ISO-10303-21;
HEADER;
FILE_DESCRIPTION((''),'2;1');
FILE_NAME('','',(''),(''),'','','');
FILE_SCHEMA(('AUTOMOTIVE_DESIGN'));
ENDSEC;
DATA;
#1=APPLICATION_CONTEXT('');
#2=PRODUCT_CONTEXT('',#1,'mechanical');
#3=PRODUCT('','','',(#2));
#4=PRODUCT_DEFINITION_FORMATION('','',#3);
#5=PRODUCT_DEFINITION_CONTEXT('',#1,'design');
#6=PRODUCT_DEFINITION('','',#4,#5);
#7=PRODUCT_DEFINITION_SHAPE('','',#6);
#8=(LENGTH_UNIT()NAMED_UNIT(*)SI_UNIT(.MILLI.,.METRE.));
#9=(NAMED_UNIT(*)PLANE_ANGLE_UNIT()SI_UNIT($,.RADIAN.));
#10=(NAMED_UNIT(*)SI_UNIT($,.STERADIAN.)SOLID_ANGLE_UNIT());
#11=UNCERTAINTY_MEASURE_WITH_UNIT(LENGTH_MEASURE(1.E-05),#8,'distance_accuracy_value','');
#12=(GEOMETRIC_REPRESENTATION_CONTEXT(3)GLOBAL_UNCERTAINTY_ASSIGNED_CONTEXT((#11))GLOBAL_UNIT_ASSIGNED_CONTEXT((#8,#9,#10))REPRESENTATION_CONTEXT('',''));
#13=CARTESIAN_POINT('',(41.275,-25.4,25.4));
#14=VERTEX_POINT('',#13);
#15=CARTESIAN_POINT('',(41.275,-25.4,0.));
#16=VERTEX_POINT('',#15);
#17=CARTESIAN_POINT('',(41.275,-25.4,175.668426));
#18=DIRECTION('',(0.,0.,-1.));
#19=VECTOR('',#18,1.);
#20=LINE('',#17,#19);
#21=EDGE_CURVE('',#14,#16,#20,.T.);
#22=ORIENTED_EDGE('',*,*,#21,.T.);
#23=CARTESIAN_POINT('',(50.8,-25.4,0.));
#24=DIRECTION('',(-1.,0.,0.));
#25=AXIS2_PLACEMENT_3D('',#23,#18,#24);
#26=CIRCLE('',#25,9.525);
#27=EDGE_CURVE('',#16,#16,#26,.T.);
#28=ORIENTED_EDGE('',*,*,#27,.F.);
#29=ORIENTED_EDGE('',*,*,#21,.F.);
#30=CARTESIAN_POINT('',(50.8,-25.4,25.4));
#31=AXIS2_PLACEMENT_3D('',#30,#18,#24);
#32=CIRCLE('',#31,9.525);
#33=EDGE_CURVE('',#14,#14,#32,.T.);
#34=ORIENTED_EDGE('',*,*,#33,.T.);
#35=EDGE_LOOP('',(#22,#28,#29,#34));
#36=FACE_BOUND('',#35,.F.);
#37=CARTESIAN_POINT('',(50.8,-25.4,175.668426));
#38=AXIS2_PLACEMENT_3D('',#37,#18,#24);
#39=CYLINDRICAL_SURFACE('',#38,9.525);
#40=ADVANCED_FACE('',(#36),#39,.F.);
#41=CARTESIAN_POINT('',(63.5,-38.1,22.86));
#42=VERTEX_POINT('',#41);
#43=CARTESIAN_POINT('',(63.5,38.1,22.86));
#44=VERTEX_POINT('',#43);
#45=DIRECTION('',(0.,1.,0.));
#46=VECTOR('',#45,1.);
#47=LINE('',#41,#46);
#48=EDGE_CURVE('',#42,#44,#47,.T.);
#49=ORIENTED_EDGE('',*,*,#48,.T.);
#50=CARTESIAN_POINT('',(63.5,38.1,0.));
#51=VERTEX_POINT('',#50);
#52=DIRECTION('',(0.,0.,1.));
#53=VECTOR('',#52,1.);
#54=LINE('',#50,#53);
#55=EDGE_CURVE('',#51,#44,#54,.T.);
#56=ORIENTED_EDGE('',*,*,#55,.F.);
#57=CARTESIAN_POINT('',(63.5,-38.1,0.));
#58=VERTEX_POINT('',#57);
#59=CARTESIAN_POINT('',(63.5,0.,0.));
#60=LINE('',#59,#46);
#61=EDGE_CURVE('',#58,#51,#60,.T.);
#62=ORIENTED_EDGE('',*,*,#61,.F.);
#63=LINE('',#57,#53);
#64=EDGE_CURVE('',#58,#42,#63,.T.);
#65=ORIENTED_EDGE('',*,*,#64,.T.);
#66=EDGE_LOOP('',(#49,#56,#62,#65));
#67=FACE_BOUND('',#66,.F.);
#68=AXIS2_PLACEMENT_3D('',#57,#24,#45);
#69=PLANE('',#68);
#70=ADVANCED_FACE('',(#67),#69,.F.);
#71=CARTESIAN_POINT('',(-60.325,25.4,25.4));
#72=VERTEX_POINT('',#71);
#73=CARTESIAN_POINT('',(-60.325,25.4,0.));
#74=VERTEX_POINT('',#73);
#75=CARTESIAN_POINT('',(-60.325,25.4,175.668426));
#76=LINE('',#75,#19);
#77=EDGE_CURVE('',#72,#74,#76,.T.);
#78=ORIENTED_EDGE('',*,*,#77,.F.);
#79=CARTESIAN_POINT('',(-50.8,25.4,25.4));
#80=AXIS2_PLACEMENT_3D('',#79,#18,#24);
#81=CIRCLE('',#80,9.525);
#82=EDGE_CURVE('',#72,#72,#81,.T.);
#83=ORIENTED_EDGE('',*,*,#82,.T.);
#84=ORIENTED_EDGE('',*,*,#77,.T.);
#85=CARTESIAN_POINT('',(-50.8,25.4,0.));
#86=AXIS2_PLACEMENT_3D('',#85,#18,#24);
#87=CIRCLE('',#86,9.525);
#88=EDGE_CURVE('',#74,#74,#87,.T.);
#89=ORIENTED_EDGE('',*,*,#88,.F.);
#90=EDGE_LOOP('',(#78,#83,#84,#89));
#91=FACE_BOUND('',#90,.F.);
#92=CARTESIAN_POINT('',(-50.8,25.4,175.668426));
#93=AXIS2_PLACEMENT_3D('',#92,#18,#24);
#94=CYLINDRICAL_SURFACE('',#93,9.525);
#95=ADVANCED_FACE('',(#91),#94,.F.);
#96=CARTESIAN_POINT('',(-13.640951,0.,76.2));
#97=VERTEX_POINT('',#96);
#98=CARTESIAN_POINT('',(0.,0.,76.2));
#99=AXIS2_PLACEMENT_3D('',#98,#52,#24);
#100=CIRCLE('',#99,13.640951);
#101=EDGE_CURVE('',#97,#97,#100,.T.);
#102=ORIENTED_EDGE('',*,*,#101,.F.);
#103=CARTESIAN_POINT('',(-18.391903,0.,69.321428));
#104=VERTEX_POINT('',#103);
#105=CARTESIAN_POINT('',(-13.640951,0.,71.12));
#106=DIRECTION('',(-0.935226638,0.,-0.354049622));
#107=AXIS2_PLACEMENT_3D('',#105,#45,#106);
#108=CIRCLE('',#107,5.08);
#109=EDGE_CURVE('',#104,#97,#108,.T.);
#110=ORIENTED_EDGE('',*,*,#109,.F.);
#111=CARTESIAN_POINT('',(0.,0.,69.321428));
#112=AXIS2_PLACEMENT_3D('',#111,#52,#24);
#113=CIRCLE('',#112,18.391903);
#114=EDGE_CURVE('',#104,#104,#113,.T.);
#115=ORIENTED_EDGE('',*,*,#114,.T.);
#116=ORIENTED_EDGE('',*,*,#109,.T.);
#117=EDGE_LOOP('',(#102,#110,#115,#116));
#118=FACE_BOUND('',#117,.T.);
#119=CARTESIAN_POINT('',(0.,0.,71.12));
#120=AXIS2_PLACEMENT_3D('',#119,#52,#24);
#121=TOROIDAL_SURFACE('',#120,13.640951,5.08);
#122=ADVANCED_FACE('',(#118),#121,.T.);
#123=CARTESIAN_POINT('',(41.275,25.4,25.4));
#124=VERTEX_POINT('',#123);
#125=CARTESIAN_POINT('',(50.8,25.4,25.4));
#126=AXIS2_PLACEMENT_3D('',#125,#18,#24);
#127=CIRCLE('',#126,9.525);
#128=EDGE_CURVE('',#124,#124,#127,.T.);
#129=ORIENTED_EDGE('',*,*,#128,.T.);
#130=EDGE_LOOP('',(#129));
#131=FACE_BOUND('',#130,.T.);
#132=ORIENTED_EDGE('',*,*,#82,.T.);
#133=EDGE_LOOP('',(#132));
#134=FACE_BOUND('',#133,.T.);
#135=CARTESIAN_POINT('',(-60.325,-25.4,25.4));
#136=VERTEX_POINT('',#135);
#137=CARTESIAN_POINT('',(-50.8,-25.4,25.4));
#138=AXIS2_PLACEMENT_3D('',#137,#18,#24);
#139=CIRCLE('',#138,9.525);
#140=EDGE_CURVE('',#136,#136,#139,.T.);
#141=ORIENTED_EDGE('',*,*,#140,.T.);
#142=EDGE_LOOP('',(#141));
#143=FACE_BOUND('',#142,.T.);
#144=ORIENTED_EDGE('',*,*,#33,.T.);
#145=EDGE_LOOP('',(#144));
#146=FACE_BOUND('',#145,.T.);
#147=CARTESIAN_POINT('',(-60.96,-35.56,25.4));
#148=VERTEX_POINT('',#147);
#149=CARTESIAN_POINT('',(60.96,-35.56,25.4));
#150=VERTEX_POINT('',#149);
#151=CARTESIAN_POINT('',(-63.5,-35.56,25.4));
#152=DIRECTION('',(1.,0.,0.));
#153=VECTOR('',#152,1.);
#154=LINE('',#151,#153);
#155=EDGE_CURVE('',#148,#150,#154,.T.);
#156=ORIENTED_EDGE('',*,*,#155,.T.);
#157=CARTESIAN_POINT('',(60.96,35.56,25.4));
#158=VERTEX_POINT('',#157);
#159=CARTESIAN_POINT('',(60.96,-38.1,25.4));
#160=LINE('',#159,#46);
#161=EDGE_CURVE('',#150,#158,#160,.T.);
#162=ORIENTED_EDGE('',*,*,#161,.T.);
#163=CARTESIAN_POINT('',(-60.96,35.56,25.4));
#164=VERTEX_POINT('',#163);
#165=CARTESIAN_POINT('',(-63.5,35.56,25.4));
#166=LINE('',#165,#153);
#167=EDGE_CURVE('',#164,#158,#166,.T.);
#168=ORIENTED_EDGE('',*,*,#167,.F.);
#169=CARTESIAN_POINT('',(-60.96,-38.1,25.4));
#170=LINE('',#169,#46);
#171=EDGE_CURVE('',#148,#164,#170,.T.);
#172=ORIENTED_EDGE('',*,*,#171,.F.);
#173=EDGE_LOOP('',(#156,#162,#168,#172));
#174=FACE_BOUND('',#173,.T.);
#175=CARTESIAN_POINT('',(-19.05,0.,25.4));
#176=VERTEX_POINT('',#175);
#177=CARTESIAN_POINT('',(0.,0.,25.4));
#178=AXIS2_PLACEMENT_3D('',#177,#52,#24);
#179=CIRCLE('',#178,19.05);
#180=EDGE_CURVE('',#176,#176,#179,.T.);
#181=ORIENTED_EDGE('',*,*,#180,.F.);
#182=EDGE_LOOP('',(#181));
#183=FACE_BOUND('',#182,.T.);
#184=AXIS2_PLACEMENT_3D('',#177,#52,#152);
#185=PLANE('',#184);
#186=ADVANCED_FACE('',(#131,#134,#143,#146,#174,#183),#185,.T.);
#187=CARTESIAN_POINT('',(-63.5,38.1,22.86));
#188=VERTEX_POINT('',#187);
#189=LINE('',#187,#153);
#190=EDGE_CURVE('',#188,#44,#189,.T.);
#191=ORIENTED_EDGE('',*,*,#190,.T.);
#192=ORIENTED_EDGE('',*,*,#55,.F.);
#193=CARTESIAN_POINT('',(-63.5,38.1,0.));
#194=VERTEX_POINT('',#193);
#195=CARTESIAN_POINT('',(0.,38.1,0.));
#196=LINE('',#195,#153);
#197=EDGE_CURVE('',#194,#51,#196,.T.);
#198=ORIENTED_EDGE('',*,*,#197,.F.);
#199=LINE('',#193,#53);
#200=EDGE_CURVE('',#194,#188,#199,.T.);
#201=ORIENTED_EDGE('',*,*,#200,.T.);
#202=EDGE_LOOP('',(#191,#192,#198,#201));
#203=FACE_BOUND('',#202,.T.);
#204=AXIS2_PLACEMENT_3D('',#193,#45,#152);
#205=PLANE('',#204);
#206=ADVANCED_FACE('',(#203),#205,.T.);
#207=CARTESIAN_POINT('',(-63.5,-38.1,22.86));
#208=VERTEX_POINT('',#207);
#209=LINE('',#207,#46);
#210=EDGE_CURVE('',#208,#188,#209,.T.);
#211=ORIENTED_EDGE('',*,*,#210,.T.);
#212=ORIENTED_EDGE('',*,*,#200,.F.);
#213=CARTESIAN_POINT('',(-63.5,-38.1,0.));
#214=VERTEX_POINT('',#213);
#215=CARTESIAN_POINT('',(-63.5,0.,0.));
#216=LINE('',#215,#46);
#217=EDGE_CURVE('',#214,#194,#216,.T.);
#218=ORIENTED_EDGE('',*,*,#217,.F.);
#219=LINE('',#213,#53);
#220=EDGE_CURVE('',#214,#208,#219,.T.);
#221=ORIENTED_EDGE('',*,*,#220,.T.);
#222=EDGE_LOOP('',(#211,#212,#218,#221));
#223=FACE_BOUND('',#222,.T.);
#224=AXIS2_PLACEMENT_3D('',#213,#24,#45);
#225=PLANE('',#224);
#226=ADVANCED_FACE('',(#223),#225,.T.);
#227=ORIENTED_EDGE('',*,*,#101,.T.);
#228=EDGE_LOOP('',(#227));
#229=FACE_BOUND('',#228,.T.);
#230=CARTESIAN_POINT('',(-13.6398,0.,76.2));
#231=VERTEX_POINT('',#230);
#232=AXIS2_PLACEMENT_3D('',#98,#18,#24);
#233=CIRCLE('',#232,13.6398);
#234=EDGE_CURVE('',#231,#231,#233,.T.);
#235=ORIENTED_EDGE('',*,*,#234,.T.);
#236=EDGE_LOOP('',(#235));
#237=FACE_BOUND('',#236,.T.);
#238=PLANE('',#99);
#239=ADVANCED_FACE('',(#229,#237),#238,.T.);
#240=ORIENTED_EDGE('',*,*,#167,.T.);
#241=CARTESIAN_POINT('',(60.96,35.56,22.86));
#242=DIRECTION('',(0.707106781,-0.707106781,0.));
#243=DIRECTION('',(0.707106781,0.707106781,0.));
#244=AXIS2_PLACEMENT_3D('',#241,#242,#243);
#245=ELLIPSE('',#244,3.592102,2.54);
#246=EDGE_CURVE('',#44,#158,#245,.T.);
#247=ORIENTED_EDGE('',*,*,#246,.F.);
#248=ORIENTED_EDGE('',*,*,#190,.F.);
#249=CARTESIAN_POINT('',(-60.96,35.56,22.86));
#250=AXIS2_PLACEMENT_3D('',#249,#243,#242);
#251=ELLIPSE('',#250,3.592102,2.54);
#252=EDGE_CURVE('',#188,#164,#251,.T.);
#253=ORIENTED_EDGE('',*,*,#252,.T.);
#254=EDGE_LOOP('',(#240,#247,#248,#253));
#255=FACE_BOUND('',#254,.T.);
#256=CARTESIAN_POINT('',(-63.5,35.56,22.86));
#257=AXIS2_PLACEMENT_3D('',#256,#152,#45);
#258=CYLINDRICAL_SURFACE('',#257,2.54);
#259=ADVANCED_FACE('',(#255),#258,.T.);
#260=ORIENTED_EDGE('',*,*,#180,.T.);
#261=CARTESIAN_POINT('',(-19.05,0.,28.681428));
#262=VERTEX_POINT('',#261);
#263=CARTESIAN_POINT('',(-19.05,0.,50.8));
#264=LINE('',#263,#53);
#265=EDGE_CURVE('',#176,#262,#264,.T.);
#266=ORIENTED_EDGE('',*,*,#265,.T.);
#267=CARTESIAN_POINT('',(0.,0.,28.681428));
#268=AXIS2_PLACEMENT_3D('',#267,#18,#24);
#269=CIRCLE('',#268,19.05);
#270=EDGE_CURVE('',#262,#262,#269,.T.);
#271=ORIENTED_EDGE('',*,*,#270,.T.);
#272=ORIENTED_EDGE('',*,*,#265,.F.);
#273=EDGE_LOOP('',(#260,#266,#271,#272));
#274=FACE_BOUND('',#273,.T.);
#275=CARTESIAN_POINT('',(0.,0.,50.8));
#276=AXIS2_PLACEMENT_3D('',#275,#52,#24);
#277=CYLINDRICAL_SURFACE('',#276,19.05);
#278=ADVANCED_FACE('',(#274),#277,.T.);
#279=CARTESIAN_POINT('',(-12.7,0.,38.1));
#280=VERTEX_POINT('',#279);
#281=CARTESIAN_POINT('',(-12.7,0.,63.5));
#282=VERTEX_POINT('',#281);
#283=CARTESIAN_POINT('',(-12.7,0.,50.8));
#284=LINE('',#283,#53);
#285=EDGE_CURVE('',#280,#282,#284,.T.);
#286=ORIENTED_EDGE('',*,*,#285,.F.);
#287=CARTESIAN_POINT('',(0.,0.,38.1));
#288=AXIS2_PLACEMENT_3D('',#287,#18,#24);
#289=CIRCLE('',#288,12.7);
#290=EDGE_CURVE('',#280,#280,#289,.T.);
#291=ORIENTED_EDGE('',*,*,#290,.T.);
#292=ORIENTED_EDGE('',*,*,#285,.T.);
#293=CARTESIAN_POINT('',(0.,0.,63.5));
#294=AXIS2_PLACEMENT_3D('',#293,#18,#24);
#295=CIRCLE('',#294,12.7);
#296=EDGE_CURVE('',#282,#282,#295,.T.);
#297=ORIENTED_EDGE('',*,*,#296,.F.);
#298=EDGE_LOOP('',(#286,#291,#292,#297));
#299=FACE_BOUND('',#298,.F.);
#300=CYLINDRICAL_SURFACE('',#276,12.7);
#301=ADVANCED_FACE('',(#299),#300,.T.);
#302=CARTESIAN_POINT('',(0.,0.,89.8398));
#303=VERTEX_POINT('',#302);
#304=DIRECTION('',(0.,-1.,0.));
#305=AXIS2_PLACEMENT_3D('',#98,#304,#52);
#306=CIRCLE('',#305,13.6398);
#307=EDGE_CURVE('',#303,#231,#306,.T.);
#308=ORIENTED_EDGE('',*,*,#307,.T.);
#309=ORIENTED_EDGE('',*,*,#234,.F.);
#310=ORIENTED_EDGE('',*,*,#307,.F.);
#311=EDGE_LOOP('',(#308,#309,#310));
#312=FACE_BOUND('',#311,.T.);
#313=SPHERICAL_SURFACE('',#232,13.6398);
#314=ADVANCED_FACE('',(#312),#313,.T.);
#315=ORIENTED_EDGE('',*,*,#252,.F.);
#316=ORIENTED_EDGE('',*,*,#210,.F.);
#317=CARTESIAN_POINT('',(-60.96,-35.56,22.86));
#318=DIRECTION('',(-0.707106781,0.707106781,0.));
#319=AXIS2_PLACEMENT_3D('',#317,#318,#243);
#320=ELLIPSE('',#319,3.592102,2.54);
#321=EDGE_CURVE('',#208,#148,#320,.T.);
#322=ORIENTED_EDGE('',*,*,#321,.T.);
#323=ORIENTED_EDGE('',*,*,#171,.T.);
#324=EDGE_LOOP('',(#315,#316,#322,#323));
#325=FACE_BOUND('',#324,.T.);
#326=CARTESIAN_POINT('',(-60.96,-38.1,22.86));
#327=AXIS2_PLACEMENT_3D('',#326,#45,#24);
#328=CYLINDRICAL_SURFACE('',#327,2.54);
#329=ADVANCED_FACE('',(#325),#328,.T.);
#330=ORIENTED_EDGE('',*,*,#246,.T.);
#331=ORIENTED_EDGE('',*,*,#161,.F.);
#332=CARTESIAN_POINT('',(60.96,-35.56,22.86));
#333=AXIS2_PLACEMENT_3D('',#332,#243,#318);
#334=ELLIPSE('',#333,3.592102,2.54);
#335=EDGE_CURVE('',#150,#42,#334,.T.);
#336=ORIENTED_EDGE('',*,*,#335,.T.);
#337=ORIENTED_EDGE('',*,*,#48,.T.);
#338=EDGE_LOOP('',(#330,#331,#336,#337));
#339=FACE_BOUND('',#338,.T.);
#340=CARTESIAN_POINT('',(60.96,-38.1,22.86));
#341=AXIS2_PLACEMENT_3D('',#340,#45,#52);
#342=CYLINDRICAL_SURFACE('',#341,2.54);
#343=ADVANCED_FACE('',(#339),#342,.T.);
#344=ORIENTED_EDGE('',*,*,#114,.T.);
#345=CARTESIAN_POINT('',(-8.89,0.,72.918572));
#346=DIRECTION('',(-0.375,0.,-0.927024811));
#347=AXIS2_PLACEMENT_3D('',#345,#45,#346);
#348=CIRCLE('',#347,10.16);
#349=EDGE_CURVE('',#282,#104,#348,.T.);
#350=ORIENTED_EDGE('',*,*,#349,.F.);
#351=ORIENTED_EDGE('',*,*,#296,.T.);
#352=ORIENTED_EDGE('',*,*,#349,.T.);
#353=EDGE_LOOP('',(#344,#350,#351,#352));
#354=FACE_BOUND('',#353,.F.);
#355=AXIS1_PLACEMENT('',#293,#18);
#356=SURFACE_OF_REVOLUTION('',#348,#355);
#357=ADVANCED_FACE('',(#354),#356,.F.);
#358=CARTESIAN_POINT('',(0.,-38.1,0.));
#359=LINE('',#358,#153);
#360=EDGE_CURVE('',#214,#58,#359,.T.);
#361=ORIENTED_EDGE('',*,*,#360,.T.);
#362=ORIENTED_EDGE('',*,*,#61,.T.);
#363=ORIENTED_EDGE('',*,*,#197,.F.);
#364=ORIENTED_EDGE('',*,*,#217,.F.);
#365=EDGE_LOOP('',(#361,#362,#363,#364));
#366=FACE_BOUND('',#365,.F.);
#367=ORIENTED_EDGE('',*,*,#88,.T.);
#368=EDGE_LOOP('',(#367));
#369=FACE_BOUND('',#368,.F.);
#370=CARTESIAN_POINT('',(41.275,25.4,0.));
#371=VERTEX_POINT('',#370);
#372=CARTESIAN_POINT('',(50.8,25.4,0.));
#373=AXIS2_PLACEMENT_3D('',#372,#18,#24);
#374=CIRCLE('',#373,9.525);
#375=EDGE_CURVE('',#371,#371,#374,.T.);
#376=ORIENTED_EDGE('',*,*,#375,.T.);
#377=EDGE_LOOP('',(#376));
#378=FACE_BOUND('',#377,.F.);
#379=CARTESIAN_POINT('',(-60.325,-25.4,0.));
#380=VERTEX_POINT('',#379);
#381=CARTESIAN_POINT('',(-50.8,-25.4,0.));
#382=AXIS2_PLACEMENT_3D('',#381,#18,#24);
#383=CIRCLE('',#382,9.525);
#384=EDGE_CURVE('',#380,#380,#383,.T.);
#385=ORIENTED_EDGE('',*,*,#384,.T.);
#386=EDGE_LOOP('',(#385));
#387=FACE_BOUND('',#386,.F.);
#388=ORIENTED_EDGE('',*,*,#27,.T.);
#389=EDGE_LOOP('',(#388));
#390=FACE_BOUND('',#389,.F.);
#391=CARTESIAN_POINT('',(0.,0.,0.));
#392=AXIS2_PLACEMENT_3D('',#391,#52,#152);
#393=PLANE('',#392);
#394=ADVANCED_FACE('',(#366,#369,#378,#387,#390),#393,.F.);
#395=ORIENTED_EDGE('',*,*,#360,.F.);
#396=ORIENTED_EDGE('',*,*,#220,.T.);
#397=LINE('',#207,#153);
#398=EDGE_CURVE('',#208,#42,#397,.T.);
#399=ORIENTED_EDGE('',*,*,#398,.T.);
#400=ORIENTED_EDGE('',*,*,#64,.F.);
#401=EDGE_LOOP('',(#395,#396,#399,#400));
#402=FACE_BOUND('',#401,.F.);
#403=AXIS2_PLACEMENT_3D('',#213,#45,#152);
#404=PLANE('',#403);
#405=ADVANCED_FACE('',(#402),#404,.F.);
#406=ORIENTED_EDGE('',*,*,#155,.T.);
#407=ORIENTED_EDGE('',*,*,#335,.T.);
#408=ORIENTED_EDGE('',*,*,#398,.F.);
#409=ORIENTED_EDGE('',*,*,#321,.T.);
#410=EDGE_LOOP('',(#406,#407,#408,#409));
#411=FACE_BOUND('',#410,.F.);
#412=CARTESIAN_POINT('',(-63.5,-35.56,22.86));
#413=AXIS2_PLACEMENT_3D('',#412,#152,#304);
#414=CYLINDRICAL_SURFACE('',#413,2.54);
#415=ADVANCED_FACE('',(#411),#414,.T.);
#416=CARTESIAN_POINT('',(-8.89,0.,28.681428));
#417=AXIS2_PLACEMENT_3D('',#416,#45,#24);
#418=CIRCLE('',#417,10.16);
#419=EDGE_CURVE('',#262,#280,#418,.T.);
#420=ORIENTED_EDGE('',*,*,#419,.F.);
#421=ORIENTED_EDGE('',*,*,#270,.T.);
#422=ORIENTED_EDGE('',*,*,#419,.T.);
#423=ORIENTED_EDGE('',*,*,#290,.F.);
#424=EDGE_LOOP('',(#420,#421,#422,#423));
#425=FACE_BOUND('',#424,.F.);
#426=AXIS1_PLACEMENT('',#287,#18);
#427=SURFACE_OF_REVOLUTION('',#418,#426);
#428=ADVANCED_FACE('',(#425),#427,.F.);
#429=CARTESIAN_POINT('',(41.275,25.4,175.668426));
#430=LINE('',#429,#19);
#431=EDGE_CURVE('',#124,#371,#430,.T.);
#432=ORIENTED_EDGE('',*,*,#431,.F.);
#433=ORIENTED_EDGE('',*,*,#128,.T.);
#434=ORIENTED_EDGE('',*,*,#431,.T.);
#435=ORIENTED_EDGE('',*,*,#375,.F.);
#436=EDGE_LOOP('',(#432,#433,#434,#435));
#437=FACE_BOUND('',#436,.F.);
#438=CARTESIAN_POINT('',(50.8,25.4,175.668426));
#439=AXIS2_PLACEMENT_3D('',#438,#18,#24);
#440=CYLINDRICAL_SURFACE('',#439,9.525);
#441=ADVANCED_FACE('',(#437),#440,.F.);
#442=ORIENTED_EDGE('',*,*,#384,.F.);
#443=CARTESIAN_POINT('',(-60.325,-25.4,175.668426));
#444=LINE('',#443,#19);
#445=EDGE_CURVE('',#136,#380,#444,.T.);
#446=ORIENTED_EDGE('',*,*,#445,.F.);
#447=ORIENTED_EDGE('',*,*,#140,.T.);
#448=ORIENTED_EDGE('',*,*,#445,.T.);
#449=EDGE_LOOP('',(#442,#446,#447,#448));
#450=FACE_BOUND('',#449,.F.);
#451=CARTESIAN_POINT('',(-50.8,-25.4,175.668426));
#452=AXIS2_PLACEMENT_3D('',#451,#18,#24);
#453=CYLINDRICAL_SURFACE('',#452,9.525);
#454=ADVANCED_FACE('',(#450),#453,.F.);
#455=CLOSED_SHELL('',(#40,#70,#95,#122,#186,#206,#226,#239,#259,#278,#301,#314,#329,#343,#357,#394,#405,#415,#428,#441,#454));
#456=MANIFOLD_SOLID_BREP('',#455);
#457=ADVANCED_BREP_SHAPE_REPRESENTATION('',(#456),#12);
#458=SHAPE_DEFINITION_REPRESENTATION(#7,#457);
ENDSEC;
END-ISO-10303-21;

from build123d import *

# Parameters (mm, degrees)
F0_W     = 127
F0_H     = 76.2
F1_DEPTH = 25.4
F3_D     = 19.05
F4_W     = 19.05
F4_H     = 50.8
F6_W     = 12.7
F6_H     = 25.4
F9_R     = 2.54


# Not quite as in the source:
# - a fillet or chamfer that OpenCascade refuses, or shapes differently, is made with other operations: its cross-section is extruded or revolved along the edge and cut away or added


with BuildPart() as f1:
    # F0 (on Top) → F1 (new body)
    with BuildSketch(Plane.XY):
        Rectangle(F0_W, F0_H)
    extrude(amount=F1_DEPTH)

    # F3 (through all)
    with Locations(Plane.XY.offset(25.4)):
        with Locations((-50.8, 25.4), (50.8, 25.4), (-50.8, -25.4), (50.8, -25.4)):
            Hole(F3_D / 2)

    # F4 (on Front) → F5 (revolve)
    with BuildSketch(Plane.XZ):
        with Locations((-9.525, 50.8)):
            Rectangle(F4_W, F4_H)
    revolve(axis=Axis((0, 0, 50.8), (0, 0, 1)))

    # F6 (on Front) → F7 (revolve, cut)
    with BuildSketch(Plane.XZ):
        with Locations((-19.05, 50.8)):
            Rectangle(F6_W, F6_H)
    revolve(axis=Axis((0, 0, 50.8), (0, 0, -1)), mode=Mode.SUBTRACT)

    # F8: fillet of radius 10.16 on 2 edges, made by hand

    # F8_s1 → F8_t2 (revolve, cut)
    with BuildSketch(Plane.XZ):
        with BuildLine():
            ThreePointArc((-19.05, 28.6814279214), (-17.3142269675, 34.3610405842), (-12.7, 38.1))
            Line((-12.7, 38.1), (-19.05, 38.1))
            Line((-19.05, 38.1), (-19.05, 28.6814279214))
        make_face()
    revolve(axis=Axis((0, 0, 38.1), (0, 0, -1)), mode=Mode.SUBTRACT)

    # F8_s3 → F8_t4 (revolve, cut)
    with BuildSketch(Plane.XZ):
        with BuildLine():
            ThreePointArc((-12.7, 63.5), (-17.3142269675, 67.2389594158), (-19.05, 72.9185720786))
            Line((-19.05, 72.9185720786), (-19.05, 63.5))
            Line((-19.05, 63.5), (-12.7, 63.5))
        make_face()
    revolve(axis=Axis((0, 0, 63.5), (0, 0, -1)), mode=Mode.SUBTRACT)

    # F9
    f9_edges = [f1.edges().sort_by_distance(p)[0] for p in [
        (0, 38.1, 25.4),
        (63.5, 0, 25.4),
        (0, -38.1, 25.4),
        (-63.5, 0, 25.4),
    ]]
    fillet(f9_edges, radius=F9_R)

    # F10: fillet of radius 5.08 on 1 edges, made by hand

    # F10_s1 → F10_t2 (revolve, cut)
    with BuildSketch(Plane.XZ):
        with BuildLine():
            ThreePointArc((-18.3919026469, 69.3214279214), (-17.8208524084, 74.0070100312), (-13.6409513235, 76.2))
            Line((-13.6409513235, 76.2), (-13.6409513235, 76.708))
            Line((-13.6409513235, 76.708), (-19.05, 76.708))
            Line((-19.05, 76.708), (-19.558, 76.2))
            ThreePointArc((-19.558, 76.2), (-19.558, 72.9185720786), (-18.8669977793, 69.1415707135))
            Line((-18.8669977793, 69.1415707135), (-18.3919026469, 69.3214279214))
        make_face()
    revolve(axis=Axis((0, 0, 76.2), (0, 0, 1)), mode=Mode.SUBTRACT)

    # F11 (on Front) → F12 (revolve)
    with BuildSketch(Plane.XZ):
        with BuildLine():
            Line((0, 76.2), (0, 89.8398))
            ThreePointArc((0, 89.8398), (-9.710461042, 85.7786789481), (-13.638526776, 76.0136363248))
            Line((-13.638526776, 76.0136363248), (0, 76.2))
        make_face()
    revolve(axis=Axis((0, 0, 83.0199), (0, 0, -1)))


solid = f1.part
